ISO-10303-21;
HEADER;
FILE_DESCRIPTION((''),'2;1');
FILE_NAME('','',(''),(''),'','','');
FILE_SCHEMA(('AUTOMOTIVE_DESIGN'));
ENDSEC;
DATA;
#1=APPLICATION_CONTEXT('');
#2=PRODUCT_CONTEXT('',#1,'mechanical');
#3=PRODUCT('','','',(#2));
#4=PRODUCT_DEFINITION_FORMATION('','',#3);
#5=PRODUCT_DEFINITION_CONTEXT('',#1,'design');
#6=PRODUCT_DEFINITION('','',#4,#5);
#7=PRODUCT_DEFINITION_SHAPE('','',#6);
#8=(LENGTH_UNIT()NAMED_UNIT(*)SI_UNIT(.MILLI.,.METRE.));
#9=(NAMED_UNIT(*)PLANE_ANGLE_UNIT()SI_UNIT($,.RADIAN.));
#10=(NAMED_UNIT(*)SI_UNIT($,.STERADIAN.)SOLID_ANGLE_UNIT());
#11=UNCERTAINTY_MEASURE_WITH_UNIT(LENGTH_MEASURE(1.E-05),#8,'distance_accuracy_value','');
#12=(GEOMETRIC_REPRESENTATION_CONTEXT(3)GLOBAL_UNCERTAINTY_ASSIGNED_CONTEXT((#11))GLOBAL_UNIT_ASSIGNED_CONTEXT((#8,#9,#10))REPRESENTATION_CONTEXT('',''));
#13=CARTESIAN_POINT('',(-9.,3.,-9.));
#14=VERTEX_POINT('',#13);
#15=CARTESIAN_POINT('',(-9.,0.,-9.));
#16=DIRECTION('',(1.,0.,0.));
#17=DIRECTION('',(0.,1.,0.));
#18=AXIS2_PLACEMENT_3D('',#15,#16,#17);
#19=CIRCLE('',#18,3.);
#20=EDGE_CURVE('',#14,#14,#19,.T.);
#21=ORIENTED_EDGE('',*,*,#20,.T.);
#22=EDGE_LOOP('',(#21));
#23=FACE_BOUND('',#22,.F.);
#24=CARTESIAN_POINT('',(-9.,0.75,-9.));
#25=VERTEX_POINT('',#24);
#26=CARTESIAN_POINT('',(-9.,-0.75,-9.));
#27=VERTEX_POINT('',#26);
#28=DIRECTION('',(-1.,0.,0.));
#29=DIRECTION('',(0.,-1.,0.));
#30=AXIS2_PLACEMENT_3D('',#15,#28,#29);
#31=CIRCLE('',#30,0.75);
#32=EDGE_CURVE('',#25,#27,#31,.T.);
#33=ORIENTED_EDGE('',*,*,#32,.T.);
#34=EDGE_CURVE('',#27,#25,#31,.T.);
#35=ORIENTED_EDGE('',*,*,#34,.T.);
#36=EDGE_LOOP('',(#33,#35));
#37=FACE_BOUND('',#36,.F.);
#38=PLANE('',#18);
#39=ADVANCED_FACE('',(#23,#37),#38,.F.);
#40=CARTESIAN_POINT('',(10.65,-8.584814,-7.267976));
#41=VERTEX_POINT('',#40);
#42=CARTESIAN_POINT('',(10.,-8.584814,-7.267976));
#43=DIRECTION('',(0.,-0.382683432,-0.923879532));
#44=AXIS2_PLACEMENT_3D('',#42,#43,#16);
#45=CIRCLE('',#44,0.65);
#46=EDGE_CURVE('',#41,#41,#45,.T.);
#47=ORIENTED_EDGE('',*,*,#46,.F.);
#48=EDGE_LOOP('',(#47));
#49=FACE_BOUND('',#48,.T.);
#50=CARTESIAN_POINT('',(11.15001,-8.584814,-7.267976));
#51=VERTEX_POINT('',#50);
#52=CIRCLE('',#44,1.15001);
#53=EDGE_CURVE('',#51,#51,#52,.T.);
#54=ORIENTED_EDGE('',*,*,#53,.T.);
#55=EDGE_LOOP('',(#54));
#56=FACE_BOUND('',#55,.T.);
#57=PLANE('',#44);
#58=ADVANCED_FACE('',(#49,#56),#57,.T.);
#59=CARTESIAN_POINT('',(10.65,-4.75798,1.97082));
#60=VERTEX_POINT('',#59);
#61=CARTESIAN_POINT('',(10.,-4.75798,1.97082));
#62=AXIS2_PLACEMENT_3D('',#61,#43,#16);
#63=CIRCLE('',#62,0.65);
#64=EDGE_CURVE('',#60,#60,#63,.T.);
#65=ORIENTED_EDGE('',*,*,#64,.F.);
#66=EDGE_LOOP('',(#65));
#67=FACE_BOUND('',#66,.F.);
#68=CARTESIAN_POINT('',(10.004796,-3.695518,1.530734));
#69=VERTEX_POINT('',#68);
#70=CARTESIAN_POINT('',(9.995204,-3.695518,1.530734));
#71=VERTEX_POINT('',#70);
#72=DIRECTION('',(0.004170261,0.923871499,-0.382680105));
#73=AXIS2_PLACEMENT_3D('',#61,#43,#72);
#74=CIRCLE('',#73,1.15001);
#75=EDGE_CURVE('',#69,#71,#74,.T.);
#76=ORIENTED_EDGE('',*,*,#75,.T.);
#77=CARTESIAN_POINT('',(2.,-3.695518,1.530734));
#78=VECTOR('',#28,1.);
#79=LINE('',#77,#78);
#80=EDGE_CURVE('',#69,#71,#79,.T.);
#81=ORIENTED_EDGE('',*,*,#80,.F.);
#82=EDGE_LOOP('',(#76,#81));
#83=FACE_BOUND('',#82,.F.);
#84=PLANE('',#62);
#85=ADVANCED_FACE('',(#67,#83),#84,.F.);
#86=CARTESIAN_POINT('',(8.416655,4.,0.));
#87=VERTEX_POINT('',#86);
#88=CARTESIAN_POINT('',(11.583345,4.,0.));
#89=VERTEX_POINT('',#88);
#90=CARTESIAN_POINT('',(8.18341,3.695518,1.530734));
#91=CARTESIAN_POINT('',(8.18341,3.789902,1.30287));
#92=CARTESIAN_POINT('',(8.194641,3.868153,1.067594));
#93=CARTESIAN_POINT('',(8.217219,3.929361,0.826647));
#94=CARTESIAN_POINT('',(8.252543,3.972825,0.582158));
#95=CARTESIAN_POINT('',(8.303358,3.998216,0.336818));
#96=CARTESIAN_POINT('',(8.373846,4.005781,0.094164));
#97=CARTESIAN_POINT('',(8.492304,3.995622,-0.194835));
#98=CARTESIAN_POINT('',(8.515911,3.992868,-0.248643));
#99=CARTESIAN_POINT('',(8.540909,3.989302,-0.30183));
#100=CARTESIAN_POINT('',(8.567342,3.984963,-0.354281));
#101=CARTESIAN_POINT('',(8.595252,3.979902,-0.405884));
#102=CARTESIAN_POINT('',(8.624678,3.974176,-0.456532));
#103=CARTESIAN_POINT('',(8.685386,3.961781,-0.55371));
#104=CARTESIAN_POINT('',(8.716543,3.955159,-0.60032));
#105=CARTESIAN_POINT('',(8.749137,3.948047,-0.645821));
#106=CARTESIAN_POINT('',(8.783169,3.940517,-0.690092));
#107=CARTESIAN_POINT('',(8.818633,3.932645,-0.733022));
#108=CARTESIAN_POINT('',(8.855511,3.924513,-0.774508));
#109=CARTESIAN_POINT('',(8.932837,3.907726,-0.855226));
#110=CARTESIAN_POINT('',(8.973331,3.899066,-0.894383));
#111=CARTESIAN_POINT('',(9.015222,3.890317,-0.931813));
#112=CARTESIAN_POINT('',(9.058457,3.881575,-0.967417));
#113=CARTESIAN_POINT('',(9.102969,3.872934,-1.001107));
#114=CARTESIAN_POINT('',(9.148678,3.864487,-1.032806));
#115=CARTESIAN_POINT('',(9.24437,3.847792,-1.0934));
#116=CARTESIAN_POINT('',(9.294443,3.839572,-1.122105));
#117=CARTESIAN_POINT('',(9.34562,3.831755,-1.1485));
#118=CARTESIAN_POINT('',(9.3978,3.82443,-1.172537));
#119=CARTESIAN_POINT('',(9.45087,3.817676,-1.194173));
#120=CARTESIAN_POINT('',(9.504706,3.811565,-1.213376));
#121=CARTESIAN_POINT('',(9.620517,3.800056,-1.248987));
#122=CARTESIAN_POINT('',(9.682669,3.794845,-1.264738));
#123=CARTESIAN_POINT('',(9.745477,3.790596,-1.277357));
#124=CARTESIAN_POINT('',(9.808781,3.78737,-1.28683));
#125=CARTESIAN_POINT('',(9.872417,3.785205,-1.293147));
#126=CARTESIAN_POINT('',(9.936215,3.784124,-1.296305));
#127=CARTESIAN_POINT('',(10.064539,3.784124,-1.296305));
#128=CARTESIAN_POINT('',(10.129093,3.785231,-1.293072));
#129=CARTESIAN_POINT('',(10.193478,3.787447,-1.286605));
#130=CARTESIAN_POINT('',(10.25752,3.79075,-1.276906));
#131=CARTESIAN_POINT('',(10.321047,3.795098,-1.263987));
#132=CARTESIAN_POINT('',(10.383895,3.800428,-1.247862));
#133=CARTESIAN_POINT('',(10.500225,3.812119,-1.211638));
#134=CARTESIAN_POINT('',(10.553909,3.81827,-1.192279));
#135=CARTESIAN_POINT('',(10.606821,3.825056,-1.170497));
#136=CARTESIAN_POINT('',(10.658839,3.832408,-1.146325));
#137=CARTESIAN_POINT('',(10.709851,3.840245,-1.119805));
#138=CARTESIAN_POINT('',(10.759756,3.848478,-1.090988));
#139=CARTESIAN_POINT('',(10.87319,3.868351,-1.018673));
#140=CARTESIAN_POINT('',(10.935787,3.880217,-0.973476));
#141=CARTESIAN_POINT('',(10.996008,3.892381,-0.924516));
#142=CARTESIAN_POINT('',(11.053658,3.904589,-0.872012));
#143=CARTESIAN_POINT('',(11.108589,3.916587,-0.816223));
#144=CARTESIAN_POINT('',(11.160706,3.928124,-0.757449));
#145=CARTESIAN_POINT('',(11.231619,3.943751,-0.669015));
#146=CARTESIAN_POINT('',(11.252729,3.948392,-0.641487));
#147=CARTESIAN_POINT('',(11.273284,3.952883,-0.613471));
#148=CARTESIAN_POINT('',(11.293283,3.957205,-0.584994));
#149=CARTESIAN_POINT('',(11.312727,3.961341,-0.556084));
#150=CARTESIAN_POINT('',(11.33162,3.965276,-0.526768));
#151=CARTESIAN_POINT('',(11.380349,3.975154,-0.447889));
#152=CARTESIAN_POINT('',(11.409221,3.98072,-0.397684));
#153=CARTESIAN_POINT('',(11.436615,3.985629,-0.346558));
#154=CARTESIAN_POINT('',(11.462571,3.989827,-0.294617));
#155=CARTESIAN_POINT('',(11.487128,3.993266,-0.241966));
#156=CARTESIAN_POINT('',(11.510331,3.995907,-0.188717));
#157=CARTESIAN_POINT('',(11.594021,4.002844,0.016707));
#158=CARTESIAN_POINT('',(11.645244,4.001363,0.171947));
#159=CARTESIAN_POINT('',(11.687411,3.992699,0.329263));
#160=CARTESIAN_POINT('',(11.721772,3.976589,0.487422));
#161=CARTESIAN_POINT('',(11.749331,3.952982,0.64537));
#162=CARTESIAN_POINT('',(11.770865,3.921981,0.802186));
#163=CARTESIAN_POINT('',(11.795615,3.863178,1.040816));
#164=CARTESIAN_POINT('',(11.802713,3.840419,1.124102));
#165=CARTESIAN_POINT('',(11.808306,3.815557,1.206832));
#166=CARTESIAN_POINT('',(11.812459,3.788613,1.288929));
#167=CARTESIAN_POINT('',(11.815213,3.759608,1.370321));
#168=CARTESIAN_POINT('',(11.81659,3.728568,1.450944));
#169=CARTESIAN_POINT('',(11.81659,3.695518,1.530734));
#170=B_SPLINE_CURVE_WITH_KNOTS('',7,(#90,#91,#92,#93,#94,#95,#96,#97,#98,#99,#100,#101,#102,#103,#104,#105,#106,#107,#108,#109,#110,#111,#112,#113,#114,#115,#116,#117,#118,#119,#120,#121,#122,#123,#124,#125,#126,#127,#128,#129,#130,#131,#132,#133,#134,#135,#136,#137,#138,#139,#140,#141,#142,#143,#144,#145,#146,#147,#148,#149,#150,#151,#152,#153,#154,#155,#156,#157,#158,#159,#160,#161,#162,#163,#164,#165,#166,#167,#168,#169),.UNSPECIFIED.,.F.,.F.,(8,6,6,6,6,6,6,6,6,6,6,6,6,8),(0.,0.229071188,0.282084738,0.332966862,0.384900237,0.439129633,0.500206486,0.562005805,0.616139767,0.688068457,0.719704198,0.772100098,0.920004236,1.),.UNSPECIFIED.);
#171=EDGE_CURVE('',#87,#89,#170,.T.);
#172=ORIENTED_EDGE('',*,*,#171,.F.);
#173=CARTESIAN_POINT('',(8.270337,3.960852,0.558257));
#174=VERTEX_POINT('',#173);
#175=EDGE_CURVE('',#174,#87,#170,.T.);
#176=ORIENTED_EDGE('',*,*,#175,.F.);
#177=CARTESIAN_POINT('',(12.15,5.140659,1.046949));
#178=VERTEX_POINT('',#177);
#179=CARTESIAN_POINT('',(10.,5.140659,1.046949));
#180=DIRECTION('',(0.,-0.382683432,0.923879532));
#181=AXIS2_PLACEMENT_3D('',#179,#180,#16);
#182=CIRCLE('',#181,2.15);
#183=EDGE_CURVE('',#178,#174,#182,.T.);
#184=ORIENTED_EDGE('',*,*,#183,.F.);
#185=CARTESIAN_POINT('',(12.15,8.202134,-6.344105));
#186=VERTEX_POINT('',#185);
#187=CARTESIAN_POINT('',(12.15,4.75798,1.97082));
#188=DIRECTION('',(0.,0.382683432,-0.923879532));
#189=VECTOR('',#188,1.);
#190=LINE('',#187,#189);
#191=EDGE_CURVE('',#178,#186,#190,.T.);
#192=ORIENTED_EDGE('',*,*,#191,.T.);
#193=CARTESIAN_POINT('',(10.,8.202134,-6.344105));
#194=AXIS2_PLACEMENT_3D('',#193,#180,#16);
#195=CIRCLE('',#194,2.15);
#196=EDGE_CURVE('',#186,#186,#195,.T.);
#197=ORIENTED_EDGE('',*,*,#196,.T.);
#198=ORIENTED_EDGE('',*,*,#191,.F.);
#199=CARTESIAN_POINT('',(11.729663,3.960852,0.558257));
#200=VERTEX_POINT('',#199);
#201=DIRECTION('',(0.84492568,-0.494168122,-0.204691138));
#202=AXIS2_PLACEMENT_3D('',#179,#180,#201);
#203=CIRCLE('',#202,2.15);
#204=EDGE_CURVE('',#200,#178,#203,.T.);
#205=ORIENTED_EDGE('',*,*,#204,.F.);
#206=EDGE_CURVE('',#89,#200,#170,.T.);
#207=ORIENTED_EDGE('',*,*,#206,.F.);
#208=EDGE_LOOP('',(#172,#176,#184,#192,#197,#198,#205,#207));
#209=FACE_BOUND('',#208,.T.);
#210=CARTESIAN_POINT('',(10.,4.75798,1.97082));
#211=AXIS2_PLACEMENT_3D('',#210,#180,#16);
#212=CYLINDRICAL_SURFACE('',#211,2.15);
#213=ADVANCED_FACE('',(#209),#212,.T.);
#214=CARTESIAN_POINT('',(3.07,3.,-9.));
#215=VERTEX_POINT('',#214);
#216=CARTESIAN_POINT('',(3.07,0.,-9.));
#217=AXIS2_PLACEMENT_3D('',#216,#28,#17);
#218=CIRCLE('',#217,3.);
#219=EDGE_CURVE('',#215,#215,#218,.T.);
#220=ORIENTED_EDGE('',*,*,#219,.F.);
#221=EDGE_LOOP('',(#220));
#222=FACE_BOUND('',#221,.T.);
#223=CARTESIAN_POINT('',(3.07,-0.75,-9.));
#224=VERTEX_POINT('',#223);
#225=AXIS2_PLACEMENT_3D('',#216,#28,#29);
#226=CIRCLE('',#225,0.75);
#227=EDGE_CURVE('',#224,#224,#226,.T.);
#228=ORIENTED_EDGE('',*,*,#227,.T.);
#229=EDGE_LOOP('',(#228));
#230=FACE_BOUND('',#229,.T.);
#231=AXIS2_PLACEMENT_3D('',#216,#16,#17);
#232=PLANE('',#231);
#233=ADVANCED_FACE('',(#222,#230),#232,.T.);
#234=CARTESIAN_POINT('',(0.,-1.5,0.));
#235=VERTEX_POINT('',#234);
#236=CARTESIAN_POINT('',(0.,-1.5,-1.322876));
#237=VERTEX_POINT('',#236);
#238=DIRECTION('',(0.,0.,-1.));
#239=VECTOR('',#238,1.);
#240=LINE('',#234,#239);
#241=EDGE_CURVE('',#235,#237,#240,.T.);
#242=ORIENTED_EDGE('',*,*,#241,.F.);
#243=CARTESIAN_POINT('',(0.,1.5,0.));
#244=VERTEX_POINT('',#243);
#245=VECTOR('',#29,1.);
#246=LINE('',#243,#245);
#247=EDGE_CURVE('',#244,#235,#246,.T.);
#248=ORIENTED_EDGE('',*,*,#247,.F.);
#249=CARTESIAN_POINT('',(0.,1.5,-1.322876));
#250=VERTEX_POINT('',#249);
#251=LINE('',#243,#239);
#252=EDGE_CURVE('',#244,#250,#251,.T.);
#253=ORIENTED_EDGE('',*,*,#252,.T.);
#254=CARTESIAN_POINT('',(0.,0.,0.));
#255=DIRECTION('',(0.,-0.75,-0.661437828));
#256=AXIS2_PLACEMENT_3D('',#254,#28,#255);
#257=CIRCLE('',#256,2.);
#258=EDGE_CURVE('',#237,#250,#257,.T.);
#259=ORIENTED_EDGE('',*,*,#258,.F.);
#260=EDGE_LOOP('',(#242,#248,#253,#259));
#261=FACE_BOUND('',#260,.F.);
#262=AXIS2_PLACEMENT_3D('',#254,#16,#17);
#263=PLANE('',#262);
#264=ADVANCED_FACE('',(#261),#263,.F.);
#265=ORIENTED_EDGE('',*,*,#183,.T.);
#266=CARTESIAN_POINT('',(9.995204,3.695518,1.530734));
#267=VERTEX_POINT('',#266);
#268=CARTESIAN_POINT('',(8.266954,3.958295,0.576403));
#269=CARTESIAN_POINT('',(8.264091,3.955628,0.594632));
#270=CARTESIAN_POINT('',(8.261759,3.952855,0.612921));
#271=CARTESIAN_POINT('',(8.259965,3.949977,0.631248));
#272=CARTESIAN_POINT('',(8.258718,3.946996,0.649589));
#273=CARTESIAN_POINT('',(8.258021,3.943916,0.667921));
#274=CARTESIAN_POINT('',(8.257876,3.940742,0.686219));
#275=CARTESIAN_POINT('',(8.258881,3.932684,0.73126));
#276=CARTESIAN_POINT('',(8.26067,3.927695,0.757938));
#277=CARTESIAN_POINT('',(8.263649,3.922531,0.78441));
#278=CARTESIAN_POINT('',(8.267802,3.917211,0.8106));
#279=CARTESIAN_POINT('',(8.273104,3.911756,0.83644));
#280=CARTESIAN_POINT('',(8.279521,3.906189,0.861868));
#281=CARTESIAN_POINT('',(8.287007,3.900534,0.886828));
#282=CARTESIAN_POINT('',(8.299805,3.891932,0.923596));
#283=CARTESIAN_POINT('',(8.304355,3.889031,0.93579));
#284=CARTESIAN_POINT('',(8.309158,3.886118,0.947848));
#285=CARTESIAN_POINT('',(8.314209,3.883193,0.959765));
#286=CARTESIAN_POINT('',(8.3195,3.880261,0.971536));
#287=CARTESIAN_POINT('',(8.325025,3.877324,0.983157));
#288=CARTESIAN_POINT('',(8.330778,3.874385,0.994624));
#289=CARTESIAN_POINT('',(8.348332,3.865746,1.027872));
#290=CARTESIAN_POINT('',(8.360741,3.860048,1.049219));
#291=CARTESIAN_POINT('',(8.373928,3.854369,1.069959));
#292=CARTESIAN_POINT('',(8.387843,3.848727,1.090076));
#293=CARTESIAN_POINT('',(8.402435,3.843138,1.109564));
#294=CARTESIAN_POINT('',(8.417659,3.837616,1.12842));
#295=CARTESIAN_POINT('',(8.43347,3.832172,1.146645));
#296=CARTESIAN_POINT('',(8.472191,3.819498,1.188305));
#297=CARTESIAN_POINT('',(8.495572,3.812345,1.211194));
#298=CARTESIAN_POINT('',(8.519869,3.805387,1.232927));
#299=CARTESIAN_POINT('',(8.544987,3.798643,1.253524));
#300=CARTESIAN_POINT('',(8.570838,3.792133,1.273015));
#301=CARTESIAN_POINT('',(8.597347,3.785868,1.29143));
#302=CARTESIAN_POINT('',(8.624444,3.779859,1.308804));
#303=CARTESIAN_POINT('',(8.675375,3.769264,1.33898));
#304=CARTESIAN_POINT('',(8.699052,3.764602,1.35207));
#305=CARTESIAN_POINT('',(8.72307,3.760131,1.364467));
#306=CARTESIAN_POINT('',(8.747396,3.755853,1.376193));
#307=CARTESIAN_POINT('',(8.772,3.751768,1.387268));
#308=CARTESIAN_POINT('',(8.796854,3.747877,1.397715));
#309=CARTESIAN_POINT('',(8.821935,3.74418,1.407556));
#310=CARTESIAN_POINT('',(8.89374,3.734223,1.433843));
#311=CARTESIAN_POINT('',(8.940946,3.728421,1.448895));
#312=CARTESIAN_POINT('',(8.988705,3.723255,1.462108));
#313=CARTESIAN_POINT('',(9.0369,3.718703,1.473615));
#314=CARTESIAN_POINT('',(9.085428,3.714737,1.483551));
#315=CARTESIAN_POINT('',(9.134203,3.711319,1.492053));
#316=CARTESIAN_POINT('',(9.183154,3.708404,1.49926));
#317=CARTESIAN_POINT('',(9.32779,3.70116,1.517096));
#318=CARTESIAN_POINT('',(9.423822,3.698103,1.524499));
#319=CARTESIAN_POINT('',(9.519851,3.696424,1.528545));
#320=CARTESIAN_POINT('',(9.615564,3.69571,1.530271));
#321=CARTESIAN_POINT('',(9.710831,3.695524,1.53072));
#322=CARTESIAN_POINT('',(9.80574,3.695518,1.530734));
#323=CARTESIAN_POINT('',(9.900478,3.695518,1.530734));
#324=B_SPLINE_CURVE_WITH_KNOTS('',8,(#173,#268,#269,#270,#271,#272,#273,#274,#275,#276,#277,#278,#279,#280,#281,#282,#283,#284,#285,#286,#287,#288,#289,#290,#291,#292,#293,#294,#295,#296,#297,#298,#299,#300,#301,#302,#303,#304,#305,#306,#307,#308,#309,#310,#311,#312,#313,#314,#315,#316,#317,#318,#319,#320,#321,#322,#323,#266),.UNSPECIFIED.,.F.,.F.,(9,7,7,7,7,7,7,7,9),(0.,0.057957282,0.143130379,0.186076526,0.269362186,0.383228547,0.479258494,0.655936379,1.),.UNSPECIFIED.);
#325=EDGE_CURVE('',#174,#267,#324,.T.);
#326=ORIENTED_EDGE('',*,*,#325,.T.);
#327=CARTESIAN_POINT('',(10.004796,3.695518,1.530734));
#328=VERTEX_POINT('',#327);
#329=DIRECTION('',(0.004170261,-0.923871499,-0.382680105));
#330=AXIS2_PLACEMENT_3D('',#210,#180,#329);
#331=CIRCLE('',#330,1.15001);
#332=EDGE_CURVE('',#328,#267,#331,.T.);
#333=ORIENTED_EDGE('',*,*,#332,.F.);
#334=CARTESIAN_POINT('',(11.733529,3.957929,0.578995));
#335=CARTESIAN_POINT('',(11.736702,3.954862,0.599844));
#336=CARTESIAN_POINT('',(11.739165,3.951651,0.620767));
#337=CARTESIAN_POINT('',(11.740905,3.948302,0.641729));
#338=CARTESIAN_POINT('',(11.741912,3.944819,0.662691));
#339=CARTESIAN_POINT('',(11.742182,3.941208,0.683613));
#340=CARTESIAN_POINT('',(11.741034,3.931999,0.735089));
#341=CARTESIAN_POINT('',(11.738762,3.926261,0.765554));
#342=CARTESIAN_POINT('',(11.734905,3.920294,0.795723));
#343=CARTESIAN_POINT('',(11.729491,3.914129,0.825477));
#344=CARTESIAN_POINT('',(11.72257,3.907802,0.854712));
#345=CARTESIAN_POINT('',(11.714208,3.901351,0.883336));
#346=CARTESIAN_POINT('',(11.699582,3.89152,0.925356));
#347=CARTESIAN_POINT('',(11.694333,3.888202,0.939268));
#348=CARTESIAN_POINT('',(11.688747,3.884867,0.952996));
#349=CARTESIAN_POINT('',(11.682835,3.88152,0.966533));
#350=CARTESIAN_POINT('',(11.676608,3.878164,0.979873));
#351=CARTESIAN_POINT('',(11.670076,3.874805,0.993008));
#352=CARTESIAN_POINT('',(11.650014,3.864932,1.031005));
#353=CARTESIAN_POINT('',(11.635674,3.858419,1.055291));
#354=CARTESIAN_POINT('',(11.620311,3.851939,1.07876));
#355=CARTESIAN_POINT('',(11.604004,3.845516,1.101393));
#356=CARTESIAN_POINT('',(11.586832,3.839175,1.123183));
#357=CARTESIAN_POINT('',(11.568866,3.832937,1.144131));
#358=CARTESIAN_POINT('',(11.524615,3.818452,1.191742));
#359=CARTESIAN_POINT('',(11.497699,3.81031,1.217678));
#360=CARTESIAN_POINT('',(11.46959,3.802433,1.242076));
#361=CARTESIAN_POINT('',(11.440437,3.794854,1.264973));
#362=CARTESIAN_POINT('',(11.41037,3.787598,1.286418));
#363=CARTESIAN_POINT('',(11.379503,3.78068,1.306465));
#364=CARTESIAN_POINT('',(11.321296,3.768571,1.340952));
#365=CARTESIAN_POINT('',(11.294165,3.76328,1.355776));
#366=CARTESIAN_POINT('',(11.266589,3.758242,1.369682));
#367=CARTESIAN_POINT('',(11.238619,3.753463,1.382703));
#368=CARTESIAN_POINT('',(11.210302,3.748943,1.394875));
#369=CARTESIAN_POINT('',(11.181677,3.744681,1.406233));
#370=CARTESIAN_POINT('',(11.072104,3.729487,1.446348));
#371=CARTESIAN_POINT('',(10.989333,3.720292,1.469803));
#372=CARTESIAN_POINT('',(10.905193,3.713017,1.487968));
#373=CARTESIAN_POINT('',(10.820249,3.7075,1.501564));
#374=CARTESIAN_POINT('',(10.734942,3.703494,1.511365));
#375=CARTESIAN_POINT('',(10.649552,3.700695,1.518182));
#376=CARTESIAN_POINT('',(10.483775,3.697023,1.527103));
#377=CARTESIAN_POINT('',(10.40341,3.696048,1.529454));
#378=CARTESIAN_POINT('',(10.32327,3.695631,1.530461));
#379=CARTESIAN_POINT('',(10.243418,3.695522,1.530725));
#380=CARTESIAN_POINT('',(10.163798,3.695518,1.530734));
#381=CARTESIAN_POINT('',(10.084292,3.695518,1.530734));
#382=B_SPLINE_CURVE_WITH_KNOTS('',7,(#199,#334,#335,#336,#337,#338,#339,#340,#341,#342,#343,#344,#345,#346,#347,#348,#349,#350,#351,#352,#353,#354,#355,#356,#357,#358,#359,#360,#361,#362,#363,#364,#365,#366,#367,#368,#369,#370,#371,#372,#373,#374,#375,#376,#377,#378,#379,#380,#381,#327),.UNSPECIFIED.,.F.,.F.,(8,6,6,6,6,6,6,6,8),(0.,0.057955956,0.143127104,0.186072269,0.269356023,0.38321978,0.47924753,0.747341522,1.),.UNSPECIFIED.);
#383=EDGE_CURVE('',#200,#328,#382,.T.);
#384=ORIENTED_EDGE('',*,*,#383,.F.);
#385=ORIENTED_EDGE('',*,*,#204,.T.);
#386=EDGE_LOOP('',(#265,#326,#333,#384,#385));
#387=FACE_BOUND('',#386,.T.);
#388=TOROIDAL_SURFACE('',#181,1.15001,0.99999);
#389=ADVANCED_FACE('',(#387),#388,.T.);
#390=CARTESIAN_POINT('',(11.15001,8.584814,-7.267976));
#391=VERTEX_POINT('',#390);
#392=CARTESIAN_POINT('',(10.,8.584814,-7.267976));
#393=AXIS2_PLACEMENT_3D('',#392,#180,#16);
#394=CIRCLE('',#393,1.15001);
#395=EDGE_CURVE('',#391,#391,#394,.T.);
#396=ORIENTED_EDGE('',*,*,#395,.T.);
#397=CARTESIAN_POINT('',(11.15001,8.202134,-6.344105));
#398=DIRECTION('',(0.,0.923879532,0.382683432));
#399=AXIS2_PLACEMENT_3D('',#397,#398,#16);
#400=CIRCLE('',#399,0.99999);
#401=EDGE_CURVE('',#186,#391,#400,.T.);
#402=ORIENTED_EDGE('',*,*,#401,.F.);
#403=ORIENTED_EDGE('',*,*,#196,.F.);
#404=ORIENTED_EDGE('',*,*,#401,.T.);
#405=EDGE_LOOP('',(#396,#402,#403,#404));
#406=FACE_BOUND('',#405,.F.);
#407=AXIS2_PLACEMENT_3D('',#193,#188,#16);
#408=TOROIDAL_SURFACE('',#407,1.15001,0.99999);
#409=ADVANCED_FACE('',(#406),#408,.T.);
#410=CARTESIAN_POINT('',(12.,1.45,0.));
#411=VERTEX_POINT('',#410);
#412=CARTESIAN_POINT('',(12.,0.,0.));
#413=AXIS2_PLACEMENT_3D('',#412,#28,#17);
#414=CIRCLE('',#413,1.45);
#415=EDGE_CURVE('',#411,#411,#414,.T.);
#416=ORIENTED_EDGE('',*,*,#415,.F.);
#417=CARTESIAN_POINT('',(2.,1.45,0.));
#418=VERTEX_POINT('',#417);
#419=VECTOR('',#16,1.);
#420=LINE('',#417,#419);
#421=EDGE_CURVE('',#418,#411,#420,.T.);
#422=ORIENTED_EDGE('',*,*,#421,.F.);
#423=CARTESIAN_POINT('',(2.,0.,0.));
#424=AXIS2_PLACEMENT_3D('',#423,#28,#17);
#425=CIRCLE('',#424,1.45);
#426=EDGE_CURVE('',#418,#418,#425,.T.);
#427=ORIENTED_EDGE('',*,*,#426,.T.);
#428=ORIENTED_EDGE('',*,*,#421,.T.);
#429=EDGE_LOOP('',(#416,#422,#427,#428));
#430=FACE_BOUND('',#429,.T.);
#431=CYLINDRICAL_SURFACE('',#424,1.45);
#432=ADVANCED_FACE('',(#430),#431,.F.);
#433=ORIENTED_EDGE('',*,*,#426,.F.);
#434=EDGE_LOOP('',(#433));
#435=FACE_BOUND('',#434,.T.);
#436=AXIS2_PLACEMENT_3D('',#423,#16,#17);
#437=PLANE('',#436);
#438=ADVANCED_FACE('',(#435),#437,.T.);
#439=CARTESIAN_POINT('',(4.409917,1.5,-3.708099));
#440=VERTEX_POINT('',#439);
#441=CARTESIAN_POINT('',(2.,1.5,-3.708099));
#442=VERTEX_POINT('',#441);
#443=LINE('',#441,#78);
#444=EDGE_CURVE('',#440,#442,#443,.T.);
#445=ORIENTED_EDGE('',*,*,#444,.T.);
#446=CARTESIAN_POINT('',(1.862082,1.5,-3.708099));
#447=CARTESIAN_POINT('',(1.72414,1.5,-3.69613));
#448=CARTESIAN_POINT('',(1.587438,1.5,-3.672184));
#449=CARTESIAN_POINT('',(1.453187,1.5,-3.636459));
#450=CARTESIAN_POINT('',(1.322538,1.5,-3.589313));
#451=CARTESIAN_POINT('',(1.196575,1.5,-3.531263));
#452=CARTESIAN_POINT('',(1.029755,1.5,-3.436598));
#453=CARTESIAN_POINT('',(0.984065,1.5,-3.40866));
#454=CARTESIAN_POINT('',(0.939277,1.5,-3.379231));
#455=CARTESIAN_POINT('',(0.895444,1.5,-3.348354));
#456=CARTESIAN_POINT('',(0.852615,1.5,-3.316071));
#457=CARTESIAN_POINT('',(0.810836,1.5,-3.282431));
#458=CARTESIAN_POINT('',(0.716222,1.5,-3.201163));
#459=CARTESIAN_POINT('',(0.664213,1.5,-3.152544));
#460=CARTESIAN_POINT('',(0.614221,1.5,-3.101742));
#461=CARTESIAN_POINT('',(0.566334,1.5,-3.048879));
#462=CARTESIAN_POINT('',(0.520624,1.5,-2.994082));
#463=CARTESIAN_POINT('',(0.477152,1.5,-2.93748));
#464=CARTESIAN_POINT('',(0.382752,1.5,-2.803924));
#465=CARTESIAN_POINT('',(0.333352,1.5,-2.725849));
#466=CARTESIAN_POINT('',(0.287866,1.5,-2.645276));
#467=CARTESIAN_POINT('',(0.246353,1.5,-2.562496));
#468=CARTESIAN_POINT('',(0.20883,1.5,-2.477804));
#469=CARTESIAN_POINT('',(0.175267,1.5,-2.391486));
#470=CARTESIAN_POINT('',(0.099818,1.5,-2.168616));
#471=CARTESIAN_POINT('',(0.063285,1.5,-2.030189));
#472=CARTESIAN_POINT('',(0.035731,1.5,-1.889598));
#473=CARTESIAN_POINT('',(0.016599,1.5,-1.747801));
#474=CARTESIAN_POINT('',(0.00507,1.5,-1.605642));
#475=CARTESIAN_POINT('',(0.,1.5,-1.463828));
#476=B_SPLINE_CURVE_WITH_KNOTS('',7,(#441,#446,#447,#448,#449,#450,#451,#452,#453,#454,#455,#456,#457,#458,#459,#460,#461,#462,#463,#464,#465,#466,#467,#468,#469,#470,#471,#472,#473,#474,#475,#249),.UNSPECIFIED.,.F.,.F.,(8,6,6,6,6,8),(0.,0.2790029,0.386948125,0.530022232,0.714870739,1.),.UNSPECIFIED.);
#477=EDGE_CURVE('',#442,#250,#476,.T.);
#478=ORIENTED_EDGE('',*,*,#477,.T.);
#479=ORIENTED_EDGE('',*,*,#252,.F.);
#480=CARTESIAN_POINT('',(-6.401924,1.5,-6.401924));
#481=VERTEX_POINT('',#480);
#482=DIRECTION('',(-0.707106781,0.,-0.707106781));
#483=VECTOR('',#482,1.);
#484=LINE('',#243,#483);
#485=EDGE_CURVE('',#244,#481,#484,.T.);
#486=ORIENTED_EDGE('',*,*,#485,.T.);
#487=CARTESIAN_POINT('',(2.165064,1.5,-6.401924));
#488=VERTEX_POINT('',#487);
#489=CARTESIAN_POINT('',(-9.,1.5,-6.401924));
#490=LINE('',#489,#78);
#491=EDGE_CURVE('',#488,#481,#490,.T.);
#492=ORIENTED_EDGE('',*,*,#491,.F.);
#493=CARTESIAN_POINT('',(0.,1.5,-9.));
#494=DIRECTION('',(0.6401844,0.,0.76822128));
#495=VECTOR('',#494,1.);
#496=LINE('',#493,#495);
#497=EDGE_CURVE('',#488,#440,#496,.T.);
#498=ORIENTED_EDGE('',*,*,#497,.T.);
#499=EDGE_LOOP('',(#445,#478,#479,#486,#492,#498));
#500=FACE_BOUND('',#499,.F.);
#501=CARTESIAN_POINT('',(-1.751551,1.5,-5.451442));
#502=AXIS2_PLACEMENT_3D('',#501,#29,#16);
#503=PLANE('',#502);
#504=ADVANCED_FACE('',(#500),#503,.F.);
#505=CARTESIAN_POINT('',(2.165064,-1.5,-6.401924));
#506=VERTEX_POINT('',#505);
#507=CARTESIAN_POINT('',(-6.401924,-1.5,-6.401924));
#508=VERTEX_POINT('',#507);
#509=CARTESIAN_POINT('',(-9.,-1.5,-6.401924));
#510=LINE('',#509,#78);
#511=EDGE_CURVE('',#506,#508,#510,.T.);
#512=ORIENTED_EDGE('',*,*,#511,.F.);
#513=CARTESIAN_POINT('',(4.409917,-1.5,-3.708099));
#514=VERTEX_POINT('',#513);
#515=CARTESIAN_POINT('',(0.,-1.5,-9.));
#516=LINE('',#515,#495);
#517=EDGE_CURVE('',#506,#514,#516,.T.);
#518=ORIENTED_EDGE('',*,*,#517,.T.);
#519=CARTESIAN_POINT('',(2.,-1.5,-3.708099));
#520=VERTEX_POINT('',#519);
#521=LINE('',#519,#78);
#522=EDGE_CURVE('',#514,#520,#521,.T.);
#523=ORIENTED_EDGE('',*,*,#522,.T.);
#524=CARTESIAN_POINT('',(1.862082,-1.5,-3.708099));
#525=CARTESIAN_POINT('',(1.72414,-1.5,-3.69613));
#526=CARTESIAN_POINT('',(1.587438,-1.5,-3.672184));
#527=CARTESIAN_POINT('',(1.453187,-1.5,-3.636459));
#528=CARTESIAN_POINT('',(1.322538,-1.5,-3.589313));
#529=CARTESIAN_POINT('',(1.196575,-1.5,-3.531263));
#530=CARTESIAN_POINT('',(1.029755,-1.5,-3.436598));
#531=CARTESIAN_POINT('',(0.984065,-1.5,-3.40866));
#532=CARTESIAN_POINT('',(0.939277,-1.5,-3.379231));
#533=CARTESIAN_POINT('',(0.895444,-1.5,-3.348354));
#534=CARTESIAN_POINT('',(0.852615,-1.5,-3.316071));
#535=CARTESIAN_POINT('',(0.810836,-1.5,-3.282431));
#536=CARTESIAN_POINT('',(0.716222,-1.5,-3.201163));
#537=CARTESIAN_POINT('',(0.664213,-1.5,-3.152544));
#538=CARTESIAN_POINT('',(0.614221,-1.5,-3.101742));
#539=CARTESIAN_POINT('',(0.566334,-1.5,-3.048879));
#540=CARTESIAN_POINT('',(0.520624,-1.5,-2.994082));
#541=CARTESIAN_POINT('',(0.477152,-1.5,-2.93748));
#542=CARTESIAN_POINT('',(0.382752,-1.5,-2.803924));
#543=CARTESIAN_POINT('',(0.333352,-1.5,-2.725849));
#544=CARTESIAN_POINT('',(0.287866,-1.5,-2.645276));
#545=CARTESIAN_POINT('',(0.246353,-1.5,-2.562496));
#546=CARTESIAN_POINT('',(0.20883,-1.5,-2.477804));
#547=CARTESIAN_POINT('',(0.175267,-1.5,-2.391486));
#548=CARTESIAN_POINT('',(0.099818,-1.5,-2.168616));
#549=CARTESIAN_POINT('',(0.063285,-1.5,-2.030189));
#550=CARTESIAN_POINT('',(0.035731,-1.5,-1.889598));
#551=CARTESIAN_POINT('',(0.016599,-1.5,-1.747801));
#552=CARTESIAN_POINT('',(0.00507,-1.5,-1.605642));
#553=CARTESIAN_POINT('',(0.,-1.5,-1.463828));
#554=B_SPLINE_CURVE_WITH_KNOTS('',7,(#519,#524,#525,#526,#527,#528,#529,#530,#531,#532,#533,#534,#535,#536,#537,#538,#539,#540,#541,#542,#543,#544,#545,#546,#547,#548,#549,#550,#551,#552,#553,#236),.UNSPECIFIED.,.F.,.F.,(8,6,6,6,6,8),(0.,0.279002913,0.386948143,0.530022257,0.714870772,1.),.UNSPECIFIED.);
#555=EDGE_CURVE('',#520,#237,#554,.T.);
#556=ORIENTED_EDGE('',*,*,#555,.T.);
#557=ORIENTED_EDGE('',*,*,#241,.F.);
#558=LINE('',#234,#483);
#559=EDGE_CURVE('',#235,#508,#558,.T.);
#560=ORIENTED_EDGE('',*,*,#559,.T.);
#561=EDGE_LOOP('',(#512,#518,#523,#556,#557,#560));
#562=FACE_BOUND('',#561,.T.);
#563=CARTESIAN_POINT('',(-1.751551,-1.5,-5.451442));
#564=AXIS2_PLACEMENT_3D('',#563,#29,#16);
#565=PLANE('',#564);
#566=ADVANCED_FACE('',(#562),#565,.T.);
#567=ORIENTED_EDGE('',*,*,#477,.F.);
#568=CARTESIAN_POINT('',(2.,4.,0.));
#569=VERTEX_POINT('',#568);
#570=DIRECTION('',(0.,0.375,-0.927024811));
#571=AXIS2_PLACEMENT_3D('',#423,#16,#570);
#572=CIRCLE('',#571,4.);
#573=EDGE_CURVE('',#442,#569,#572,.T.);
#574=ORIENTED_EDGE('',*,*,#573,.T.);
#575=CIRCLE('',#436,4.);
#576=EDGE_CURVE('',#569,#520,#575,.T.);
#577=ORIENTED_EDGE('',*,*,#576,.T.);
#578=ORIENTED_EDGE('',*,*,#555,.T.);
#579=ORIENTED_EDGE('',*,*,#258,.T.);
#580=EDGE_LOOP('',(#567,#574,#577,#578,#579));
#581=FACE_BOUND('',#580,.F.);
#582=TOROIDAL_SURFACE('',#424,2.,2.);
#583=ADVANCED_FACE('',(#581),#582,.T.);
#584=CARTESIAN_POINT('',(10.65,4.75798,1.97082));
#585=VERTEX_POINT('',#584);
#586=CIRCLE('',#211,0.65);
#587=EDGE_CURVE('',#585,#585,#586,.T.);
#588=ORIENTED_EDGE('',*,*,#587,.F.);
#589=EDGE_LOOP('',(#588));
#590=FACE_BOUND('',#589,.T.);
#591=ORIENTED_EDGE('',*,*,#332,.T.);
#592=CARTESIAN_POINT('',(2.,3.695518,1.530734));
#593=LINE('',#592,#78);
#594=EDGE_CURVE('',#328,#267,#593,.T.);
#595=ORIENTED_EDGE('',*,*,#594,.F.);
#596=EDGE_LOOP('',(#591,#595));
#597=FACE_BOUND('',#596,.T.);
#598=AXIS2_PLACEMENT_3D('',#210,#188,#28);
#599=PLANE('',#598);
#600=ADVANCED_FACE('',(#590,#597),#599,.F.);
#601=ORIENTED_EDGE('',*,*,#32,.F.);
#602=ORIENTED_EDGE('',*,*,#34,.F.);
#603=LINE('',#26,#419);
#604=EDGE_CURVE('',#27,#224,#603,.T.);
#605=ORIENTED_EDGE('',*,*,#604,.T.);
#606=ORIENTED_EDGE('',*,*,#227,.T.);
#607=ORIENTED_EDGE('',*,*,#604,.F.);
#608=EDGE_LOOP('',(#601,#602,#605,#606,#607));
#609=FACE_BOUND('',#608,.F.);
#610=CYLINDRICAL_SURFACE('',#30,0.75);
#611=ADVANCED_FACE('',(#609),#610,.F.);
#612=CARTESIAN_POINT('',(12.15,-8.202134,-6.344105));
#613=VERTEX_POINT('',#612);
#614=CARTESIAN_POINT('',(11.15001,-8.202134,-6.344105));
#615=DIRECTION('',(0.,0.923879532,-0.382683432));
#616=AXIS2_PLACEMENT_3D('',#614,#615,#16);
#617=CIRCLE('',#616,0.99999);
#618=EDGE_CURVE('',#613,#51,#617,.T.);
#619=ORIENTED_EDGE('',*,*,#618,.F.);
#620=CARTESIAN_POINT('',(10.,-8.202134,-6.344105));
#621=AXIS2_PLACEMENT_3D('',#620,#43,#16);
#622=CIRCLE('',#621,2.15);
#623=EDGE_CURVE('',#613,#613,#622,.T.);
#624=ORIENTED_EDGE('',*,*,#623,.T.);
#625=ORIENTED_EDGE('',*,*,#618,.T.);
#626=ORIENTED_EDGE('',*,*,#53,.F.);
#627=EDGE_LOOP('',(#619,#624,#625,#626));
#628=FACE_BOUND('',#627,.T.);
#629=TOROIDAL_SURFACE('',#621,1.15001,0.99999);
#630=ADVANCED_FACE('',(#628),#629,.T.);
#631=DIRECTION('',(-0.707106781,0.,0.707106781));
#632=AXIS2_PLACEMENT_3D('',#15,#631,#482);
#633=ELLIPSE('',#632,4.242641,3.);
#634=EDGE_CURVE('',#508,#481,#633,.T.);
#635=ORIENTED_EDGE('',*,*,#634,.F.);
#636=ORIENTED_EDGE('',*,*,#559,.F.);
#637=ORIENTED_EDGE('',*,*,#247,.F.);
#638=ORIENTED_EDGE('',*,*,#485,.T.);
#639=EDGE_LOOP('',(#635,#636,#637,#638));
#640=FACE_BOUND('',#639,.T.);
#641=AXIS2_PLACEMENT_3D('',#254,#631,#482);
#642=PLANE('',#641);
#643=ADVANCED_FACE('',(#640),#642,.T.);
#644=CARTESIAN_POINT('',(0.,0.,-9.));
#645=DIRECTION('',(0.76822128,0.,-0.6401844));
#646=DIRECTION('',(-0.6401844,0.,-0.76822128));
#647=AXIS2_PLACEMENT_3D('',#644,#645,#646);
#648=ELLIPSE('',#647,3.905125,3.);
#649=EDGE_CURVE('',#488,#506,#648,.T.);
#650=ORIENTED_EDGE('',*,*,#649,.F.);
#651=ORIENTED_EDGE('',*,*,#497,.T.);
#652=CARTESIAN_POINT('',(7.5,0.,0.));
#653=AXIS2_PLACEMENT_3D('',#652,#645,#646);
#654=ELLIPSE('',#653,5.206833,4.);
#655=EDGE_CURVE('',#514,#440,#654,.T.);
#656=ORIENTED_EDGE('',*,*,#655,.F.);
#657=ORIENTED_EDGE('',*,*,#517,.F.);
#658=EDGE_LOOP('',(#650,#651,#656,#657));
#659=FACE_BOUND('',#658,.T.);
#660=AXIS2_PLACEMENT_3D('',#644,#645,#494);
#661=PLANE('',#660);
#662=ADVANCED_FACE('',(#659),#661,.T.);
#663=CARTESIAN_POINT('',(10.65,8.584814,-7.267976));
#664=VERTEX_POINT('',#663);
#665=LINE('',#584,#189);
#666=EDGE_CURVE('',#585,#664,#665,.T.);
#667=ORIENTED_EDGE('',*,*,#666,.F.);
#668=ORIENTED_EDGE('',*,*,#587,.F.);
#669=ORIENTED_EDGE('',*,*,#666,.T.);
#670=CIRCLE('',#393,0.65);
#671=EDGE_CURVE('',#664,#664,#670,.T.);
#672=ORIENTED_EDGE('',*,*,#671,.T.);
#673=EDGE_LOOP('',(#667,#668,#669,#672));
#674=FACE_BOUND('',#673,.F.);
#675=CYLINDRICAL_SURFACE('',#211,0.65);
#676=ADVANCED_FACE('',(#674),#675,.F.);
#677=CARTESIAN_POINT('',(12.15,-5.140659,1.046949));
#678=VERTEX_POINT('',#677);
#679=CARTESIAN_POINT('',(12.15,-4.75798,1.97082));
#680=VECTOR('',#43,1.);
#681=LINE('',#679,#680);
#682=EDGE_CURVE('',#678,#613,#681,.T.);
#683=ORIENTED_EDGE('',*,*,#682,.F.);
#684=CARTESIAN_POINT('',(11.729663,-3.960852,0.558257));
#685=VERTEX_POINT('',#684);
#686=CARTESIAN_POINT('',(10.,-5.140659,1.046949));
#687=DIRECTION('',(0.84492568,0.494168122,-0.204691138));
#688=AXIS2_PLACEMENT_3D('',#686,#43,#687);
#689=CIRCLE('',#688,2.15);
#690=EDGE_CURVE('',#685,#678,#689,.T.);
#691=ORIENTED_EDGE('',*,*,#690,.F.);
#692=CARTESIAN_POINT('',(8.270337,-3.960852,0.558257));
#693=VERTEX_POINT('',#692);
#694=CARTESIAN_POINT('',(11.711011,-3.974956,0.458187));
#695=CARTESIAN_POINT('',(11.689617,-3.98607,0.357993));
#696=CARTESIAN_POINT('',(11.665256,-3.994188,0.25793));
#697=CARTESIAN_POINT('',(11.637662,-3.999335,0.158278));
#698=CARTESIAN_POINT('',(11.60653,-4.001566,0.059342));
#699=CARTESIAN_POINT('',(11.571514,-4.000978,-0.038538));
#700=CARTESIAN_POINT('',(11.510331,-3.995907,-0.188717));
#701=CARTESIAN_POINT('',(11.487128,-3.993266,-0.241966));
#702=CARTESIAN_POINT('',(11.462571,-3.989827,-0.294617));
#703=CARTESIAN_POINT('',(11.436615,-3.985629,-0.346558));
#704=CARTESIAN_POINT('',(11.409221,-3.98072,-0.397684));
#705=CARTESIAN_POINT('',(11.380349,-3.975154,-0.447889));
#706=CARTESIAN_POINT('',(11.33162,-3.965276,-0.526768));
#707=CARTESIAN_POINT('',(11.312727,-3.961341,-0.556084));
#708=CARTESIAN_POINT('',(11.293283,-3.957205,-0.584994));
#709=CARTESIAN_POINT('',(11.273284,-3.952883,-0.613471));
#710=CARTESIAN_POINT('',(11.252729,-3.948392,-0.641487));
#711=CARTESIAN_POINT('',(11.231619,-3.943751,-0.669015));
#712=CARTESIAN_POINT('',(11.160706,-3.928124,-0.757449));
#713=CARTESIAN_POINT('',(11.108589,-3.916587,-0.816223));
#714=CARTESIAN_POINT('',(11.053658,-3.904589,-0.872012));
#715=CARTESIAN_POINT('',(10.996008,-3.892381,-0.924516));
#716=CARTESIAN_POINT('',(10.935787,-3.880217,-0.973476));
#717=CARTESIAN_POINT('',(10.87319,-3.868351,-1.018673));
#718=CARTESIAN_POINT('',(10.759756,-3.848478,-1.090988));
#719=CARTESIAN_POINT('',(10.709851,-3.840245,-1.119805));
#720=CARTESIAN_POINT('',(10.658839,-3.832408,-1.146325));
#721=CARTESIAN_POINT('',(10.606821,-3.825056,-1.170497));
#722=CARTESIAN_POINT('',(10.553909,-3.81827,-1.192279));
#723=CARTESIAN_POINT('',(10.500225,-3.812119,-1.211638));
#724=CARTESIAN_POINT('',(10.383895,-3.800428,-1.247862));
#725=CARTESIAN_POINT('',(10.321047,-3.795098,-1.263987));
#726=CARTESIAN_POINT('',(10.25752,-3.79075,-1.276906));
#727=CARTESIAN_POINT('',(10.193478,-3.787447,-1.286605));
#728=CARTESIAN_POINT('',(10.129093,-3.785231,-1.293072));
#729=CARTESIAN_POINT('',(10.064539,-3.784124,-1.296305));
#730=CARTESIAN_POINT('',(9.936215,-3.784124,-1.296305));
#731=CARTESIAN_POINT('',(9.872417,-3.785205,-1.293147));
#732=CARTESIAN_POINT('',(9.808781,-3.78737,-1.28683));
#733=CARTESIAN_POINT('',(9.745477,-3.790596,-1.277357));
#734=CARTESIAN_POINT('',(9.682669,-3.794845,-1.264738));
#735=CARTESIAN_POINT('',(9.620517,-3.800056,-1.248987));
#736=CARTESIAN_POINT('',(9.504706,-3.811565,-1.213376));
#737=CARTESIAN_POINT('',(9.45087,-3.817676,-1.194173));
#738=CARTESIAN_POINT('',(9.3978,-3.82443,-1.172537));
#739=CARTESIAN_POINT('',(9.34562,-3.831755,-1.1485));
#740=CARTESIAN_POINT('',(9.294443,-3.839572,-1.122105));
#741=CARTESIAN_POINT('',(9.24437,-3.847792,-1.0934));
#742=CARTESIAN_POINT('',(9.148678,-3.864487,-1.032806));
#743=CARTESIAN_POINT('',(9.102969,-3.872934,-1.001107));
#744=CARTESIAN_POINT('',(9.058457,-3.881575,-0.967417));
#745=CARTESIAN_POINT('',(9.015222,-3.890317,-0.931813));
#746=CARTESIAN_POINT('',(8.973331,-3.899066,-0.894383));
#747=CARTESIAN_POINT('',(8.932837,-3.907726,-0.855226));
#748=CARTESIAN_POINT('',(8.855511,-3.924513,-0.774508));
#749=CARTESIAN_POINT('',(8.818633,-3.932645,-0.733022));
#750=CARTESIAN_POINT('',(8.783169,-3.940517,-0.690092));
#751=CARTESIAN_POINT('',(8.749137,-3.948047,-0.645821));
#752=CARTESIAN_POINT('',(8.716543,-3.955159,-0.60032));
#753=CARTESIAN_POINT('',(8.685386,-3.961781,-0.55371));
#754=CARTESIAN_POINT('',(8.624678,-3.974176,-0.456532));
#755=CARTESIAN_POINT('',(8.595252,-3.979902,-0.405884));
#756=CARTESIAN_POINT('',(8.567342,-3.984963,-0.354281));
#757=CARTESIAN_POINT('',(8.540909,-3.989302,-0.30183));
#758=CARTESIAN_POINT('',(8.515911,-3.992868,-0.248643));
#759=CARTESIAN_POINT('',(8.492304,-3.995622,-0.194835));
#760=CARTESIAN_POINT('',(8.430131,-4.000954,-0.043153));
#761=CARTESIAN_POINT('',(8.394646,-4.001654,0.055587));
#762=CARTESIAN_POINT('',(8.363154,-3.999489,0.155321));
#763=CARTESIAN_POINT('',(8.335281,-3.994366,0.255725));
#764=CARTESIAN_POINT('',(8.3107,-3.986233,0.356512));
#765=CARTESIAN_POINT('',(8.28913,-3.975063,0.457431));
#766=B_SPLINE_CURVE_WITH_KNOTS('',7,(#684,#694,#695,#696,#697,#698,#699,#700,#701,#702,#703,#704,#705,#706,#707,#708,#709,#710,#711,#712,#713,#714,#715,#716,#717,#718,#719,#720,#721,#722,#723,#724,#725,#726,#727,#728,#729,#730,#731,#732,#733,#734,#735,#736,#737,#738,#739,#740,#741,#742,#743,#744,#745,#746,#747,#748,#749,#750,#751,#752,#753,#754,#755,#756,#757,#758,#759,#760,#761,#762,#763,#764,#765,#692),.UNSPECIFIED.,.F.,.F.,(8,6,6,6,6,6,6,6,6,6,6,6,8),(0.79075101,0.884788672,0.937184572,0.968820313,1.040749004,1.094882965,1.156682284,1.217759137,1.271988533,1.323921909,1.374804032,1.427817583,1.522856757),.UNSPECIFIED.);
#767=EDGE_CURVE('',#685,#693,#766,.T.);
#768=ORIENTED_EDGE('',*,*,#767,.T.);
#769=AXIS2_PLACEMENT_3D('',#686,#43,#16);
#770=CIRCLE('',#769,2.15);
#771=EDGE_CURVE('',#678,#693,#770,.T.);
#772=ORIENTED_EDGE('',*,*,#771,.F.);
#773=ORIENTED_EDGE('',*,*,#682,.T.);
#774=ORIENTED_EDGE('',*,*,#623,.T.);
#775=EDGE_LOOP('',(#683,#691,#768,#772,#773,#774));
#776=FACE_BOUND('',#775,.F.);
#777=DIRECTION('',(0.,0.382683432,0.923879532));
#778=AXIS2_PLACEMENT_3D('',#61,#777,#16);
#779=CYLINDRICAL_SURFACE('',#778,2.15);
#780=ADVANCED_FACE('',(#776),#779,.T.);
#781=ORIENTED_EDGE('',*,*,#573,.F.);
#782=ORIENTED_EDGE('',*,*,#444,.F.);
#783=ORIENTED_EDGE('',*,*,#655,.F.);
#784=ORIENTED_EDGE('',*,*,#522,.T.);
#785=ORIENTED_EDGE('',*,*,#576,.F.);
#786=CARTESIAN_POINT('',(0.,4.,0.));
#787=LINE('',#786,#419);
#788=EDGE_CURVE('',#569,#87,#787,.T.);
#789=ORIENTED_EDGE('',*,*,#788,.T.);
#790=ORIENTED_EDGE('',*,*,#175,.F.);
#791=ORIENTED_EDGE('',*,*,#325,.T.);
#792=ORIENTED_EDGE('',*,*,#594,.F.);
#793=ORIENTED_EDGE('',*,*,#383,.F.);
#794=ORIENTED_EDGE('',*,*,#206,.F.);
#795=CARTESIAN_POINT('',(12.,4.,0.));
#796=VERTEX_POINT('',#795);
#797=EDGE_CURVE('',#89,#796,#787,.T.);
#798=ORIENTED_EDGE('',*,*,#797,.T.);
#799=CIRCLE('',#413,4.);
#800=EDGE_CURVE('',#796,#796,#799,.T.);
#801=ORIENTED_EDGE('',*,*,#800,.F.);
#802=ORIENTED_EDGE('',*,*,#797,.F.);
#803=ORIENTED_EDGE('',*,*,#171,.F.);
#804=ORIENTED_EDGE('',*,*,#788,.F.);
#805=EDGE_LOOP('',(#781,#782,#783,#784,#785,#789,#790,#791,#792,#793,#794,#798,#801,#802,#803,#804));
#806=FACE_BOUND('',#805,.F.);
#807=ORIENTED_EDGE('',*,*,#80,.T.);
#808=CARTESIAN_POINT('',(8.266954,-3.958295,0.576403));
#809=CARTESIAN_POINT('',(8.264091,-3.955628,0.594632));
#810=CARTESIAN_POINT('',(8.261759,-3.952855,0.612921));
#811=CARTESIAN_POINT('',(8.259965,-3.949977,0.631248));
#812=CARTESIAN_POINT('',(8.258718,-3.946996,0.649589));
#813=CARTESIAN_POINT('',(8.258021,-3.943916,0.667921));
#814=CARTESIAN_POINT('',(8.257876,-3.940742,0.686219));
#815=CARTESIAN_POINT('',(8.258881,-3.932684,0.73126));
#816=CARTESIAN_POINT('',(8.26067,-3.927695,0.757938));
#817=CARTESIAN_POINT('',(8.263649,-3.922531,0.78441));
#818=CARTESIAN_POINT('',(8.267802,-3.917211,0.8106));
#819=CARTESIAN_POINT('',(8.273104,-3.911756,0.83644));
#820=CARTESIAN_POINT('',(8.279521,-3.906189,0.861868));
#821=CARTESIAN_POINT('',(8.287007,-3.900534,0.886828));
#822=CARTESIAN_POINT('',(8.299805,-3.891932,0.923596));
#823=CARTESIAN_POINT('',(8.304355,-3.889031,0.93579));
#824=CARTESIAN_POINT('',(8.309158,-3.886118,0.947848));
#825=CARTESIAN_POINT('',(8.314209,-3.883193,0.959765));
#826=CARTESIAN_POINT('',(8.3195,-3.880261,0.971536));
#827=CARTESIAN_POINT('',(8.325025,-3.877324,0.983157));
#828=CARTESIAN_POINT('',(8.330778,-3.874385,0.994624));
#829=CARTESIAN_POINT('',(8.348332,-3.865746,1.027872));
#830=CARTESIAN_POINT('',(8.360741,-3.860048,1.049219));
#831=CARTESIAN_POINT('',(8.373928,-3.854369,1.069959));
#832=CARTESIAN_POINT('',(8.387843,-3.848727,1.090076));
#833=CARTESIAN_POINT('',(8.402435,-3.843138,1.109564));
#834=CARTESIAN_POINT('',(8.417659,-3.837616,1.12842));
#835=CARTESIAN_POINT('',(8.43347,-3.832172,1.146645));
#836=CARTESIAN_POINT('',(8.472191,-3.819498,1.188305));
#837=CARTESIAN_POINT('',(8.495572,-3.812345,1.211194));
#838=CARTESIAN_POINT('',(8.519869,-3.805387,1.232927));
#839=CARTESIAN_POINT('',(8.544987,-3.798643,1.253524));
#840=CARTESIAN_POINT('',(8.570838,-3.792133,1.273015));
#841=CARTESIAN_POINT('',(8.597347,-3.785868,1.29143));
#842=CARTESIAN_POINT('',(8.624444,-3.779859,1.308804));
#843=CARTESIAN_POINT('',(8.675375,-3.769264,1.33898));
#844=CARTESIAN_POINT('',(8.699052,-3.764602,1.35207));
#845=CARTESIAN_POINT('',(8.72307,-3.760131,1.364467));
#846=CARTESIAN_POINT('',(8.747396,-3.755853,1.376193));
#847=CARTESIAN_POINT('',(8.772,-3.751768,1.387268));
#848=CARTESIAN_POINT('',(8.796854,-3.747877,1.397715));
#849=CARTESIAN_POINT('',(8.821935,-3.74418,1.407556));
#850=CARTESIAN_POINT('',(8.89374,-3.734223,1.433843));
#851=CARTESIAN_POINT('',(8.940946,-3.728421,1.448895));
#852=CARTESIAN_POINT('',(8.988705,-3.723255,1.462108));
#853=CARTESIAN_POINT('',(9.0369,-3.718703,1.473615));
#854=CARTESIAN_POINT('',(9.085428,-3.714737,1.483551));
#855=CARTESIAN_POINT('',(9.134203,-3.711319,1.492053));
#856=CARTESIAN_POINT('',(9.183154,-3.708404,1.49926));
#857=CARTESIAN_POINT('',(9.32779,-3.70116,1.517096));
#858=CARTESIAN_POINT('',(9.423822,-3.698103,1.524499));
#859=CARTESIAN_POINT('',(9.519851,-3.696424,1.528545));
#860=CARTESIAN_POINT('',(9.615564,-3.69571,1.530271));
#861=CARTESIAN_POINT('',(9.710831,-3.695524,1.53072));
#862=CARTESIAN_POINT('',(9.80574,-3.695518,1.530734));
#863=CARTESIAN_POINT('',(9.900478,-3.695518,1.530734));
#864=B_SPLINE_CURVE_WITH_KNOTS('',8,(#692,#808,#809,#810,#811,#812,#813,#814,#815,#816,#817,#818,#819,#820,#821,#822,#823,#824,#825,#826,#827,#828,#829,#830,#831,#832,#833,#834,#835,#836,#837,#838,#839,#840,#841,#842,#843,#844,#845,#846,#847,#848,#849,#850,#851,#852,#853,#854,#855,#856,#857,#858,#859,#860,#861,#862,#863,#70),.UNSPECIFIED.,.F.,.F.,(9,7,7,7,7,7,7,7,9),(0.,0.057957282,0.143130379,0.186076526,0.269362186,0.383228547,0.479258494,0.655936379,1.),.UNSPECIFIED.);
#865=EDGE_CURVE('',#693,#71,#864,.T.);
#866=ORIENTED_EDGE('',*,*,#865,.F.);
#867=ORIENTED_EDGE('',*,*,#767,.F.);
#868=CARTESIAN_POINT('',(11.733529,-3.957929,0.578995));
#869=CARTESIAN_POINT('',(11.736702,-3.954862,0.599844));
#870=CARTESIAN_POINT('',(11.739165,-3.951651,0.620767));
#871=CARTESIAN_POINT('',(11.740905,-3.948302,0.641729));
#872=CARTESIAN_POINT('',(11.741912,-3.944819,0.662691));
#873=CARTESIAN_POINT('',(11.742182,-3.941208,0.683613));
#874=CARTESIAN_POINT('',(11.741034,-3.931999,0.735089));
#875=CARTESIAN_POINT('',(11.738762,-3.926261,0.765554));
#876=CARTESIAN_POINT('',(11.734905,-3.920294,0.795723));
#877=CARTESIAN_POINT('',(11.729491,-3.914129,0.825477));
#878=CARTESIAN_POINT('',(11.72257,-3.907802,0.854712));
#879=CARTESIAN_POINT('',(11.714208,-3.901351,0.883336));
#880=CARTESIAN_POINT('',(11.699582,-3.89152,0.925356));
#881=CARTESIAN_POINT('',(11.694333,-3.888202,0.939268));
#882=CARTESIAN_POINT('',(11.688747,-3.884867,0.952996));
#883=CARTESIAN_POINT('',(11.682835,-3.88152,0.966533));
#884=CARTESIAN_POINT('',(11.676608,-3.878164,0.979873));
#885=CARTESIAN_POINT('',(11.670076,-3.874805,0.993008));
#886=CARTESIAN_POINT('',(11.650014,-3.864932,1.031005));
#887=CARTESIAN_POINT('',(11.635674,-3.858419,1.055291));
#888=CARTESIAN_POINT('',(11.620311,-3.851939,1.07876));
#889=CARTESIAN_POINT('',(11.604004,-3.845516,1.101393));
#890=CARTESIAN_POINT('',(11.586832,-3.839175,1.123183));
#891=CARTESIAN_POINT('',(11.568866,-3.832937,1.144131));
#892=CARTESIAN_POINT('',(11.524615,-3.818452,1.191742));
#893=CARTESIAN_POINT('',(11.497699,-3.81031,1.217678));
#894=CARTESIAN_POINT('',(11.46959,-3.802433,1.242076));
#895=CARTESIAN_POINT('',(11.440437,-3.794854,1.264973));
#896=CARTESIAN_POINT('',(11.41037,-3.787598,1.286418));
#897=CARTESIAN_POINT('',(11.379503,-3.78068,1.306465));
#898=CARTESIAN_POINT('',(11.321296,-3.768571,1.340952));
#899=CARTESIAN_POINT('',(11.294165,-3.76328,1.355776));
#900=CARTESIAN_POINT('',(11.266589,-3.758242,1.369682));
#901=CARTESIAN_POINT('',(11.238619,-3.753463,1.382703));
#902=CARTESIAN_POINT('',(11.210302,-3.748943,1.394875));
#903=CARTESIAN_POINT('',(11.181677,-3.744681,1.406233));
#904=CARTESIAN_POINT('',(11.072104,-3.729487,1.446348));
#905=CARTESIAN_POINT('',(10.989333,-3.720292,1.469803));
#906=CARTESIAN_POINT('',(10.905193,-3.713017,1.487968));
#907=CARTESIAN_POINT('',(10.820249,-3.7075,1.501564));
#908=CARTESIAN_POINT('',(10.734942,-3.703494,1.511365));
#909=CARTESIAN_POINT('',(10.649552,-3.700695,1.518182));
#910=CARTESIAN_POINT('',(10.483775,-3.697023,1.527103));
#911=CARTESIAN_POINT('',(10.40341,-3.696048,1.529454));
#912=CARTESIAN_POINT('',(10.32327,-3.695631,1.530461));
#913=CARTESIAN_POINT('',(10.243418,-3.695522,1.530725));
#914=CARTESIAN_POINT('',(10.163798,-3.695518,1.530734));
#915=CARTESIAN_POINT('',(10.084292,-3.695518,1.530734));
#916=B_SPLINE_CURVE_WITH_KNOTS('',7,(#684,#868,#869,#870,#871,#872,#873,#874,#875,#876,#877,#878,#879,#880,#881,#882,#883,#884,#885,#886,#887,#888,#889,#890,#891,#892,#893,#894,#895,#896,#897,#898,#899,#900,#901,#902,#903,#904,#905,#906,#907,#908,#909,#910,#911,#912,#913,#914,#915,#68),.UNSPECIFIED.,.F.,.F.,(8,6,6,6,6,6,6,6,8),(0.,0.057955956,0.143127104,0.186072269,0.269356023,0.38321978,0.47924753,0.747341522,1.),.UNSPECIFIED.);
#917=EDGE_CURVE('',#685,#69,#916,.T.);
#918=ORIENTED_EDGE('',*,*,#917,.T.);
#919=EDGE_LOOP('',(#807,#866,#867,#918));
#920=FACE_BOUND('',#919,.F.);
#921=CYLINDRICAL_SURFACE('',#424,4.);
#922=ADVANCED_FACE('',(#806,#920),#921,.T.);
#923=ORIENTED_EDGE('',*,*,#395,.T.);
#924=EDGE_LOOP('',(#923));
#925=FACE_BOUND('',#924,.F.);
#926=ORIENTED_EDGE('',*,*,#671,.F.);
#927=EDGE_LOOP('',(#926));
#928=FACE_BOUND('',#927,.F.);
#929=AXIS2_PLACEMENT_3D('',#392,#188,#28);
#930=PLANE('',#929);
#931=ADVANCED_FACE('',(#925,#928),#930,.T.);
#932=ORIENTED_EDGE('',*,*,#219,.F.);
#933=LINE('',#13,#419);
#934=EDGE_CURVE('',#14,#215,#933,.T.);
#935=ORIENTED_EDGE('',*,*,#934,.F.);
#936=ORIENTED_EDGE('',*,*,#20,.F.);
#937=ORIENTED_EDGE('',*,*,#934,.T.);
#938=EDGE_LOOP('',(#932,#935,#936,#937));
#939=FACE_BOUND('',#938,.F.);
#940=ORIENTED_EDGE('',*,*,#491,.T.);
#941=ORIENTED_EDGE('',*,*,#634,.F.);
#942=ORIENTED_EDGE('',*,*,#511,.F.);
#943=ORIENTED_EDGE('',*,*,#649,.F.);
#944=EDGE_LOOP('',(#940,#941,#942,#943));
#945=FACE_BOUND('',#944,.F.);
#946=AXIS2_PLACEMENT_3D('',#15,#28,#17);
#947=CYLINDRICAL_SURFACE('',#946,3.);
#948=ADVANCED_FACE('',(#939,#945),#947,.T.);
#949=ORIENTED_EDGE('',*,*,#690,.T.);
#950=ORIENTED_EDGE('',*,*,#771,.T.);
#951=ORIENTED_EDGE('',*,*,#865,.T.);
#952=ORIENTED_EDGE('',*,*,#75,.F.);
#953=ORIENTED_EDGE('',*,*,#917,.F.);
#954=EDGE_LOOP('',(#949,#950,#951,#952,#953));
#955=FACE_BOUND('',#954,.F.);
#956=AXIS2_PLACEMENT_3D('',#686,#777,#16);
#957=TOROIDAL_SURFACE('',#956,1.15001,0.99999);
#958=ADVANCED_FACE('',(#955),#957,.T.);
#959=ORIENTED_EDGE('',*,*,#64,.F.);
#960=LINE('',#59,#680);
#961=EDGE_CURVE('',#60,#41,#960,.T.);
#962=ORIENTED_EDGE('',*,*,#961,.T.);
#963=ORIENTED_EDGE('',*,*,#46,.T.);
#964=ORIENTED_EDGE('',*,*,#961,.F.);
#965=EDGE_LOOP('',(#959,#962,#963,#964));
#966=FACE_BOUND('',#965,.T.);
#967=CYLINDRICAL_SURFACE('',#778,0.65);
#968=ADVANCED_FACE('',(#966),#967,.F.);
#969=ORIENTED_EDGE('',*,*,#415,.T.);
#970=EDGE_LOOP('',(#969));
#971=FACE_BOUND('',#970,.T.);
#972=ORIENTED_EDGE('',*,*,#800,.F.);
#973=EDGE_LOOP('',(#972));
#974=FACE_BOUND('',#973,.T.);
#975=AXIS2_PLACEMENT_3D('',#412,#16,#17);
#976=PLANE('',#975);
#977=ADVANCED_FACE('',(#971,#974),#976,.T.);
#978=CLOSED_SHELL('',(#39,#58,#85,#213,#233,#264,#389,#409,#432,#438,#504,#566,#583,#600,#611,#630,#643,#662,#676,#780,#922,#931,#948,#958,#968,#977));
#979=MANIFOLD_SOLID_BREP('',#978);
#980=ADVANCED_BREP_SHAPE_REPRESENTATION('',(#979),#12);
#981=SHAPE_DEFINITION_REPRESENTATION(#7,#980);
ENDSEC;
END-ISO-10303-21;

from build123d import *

# Parameters (mm, degrees)
F0_R      = 4
F1_DEPTH  = 2
F2_R      = 4
F2_R_2    = 1.45
F3_DEPTH  = 10
F5_DEPTH  = 1.5
F8_R      = 3
F9_DEPTH  = 12.07
F10_R     = 0.75
F11_DEPTH = 25
F13_R     = 2
F14_R     = 2.15
F14_R_2   = 0.65
F15_DEPTH = 10
F16_R     = 0.99999


# Not quite as in the source:
# - a fillet or chamfer is up to 0.001 mm smaller than in the source, because OpenCascade refuses the exact size


with BuildPart() as f1:
    # F0 (on Right) → F1 (new body)
    with BuildSketch(Plane.YZ):
        Circle(F0_R)
    extrude(amount=F1_DEPTH)

    # F2 (on face) → F3 (join)
    with BuildSketch(Plane.YZ.offset(2)):
        Circle(F2_R)
        Circle(F2_R_2, mode=Mode.SUBTRACT)
    extrude(amount=F3_DEPTH)

    # F4 (on Front) → F5 (join, symmetric)
    with BuildSketch(Plane.XZ):
        Polygon((0, -3), (0, 0), (-9, -9), (0, -9), (5, -3), align=None)
    extrude(amount=F5_DEPTH, both=True)

    # F8 (on plane+point) → F9 (join)
    with BuildSketch(Plane.YZ.offset(-9)):
        with Locations((0, -9)):
            Circle(F8_R)
    extrude(amount=F9_DEPTH)

    # F10 (on face) → F11 (cut)
    with BuildSketch(Plane(origin=(-9, 0, 0), x_dir=(0, -1, 0), z_dir=(-1, 0, 0))):
        with Locations((0, -9)):
            Circle(F10_R)
    extrude(amount=-F11_DEPTH, mode=Mode.SUBTRACT)

    # F13
    f13_edges = [f1.edges().sort_by_distance(p)[0] for p in [
        (0, -2.236068, 3.316625),
    ]]
    fillet(f13_edges, radius=F13_R)

    # F14 (on face) → F15 (join)
    with BuildSketch(Plane(origin=(0, 0, 0), x_dir=(1, 0, 0), z_dir=(0, -0.3826834324, -0.9238795325))):
        with Locations((10, 5.15)):
            Circle(F14_R)
        with Locations((10, 5.15)):
            Circle(F14_R_2, mode=Mode.SUBTRACT)
    extrude(amount=F15_DEPTH)

    # F16 (radius 1 in the source; OpenCascade refuses exactly that, so slightly less here)
    f16_edges = [f1.edges().sort_by_distance(p)[0] for p in [
        (7.85, -8.584814, -7.267976),
        (9.401322, -6.665759, 2.761048),
    ]]
    fillet(f16_edges, radius=F16_R)

    # F17: F1 across plane


with BuildPart() as f1_1:
    add(f1.part)
    add(f1.part.mirror(Plane.XZ))


solid = f1_1.part
